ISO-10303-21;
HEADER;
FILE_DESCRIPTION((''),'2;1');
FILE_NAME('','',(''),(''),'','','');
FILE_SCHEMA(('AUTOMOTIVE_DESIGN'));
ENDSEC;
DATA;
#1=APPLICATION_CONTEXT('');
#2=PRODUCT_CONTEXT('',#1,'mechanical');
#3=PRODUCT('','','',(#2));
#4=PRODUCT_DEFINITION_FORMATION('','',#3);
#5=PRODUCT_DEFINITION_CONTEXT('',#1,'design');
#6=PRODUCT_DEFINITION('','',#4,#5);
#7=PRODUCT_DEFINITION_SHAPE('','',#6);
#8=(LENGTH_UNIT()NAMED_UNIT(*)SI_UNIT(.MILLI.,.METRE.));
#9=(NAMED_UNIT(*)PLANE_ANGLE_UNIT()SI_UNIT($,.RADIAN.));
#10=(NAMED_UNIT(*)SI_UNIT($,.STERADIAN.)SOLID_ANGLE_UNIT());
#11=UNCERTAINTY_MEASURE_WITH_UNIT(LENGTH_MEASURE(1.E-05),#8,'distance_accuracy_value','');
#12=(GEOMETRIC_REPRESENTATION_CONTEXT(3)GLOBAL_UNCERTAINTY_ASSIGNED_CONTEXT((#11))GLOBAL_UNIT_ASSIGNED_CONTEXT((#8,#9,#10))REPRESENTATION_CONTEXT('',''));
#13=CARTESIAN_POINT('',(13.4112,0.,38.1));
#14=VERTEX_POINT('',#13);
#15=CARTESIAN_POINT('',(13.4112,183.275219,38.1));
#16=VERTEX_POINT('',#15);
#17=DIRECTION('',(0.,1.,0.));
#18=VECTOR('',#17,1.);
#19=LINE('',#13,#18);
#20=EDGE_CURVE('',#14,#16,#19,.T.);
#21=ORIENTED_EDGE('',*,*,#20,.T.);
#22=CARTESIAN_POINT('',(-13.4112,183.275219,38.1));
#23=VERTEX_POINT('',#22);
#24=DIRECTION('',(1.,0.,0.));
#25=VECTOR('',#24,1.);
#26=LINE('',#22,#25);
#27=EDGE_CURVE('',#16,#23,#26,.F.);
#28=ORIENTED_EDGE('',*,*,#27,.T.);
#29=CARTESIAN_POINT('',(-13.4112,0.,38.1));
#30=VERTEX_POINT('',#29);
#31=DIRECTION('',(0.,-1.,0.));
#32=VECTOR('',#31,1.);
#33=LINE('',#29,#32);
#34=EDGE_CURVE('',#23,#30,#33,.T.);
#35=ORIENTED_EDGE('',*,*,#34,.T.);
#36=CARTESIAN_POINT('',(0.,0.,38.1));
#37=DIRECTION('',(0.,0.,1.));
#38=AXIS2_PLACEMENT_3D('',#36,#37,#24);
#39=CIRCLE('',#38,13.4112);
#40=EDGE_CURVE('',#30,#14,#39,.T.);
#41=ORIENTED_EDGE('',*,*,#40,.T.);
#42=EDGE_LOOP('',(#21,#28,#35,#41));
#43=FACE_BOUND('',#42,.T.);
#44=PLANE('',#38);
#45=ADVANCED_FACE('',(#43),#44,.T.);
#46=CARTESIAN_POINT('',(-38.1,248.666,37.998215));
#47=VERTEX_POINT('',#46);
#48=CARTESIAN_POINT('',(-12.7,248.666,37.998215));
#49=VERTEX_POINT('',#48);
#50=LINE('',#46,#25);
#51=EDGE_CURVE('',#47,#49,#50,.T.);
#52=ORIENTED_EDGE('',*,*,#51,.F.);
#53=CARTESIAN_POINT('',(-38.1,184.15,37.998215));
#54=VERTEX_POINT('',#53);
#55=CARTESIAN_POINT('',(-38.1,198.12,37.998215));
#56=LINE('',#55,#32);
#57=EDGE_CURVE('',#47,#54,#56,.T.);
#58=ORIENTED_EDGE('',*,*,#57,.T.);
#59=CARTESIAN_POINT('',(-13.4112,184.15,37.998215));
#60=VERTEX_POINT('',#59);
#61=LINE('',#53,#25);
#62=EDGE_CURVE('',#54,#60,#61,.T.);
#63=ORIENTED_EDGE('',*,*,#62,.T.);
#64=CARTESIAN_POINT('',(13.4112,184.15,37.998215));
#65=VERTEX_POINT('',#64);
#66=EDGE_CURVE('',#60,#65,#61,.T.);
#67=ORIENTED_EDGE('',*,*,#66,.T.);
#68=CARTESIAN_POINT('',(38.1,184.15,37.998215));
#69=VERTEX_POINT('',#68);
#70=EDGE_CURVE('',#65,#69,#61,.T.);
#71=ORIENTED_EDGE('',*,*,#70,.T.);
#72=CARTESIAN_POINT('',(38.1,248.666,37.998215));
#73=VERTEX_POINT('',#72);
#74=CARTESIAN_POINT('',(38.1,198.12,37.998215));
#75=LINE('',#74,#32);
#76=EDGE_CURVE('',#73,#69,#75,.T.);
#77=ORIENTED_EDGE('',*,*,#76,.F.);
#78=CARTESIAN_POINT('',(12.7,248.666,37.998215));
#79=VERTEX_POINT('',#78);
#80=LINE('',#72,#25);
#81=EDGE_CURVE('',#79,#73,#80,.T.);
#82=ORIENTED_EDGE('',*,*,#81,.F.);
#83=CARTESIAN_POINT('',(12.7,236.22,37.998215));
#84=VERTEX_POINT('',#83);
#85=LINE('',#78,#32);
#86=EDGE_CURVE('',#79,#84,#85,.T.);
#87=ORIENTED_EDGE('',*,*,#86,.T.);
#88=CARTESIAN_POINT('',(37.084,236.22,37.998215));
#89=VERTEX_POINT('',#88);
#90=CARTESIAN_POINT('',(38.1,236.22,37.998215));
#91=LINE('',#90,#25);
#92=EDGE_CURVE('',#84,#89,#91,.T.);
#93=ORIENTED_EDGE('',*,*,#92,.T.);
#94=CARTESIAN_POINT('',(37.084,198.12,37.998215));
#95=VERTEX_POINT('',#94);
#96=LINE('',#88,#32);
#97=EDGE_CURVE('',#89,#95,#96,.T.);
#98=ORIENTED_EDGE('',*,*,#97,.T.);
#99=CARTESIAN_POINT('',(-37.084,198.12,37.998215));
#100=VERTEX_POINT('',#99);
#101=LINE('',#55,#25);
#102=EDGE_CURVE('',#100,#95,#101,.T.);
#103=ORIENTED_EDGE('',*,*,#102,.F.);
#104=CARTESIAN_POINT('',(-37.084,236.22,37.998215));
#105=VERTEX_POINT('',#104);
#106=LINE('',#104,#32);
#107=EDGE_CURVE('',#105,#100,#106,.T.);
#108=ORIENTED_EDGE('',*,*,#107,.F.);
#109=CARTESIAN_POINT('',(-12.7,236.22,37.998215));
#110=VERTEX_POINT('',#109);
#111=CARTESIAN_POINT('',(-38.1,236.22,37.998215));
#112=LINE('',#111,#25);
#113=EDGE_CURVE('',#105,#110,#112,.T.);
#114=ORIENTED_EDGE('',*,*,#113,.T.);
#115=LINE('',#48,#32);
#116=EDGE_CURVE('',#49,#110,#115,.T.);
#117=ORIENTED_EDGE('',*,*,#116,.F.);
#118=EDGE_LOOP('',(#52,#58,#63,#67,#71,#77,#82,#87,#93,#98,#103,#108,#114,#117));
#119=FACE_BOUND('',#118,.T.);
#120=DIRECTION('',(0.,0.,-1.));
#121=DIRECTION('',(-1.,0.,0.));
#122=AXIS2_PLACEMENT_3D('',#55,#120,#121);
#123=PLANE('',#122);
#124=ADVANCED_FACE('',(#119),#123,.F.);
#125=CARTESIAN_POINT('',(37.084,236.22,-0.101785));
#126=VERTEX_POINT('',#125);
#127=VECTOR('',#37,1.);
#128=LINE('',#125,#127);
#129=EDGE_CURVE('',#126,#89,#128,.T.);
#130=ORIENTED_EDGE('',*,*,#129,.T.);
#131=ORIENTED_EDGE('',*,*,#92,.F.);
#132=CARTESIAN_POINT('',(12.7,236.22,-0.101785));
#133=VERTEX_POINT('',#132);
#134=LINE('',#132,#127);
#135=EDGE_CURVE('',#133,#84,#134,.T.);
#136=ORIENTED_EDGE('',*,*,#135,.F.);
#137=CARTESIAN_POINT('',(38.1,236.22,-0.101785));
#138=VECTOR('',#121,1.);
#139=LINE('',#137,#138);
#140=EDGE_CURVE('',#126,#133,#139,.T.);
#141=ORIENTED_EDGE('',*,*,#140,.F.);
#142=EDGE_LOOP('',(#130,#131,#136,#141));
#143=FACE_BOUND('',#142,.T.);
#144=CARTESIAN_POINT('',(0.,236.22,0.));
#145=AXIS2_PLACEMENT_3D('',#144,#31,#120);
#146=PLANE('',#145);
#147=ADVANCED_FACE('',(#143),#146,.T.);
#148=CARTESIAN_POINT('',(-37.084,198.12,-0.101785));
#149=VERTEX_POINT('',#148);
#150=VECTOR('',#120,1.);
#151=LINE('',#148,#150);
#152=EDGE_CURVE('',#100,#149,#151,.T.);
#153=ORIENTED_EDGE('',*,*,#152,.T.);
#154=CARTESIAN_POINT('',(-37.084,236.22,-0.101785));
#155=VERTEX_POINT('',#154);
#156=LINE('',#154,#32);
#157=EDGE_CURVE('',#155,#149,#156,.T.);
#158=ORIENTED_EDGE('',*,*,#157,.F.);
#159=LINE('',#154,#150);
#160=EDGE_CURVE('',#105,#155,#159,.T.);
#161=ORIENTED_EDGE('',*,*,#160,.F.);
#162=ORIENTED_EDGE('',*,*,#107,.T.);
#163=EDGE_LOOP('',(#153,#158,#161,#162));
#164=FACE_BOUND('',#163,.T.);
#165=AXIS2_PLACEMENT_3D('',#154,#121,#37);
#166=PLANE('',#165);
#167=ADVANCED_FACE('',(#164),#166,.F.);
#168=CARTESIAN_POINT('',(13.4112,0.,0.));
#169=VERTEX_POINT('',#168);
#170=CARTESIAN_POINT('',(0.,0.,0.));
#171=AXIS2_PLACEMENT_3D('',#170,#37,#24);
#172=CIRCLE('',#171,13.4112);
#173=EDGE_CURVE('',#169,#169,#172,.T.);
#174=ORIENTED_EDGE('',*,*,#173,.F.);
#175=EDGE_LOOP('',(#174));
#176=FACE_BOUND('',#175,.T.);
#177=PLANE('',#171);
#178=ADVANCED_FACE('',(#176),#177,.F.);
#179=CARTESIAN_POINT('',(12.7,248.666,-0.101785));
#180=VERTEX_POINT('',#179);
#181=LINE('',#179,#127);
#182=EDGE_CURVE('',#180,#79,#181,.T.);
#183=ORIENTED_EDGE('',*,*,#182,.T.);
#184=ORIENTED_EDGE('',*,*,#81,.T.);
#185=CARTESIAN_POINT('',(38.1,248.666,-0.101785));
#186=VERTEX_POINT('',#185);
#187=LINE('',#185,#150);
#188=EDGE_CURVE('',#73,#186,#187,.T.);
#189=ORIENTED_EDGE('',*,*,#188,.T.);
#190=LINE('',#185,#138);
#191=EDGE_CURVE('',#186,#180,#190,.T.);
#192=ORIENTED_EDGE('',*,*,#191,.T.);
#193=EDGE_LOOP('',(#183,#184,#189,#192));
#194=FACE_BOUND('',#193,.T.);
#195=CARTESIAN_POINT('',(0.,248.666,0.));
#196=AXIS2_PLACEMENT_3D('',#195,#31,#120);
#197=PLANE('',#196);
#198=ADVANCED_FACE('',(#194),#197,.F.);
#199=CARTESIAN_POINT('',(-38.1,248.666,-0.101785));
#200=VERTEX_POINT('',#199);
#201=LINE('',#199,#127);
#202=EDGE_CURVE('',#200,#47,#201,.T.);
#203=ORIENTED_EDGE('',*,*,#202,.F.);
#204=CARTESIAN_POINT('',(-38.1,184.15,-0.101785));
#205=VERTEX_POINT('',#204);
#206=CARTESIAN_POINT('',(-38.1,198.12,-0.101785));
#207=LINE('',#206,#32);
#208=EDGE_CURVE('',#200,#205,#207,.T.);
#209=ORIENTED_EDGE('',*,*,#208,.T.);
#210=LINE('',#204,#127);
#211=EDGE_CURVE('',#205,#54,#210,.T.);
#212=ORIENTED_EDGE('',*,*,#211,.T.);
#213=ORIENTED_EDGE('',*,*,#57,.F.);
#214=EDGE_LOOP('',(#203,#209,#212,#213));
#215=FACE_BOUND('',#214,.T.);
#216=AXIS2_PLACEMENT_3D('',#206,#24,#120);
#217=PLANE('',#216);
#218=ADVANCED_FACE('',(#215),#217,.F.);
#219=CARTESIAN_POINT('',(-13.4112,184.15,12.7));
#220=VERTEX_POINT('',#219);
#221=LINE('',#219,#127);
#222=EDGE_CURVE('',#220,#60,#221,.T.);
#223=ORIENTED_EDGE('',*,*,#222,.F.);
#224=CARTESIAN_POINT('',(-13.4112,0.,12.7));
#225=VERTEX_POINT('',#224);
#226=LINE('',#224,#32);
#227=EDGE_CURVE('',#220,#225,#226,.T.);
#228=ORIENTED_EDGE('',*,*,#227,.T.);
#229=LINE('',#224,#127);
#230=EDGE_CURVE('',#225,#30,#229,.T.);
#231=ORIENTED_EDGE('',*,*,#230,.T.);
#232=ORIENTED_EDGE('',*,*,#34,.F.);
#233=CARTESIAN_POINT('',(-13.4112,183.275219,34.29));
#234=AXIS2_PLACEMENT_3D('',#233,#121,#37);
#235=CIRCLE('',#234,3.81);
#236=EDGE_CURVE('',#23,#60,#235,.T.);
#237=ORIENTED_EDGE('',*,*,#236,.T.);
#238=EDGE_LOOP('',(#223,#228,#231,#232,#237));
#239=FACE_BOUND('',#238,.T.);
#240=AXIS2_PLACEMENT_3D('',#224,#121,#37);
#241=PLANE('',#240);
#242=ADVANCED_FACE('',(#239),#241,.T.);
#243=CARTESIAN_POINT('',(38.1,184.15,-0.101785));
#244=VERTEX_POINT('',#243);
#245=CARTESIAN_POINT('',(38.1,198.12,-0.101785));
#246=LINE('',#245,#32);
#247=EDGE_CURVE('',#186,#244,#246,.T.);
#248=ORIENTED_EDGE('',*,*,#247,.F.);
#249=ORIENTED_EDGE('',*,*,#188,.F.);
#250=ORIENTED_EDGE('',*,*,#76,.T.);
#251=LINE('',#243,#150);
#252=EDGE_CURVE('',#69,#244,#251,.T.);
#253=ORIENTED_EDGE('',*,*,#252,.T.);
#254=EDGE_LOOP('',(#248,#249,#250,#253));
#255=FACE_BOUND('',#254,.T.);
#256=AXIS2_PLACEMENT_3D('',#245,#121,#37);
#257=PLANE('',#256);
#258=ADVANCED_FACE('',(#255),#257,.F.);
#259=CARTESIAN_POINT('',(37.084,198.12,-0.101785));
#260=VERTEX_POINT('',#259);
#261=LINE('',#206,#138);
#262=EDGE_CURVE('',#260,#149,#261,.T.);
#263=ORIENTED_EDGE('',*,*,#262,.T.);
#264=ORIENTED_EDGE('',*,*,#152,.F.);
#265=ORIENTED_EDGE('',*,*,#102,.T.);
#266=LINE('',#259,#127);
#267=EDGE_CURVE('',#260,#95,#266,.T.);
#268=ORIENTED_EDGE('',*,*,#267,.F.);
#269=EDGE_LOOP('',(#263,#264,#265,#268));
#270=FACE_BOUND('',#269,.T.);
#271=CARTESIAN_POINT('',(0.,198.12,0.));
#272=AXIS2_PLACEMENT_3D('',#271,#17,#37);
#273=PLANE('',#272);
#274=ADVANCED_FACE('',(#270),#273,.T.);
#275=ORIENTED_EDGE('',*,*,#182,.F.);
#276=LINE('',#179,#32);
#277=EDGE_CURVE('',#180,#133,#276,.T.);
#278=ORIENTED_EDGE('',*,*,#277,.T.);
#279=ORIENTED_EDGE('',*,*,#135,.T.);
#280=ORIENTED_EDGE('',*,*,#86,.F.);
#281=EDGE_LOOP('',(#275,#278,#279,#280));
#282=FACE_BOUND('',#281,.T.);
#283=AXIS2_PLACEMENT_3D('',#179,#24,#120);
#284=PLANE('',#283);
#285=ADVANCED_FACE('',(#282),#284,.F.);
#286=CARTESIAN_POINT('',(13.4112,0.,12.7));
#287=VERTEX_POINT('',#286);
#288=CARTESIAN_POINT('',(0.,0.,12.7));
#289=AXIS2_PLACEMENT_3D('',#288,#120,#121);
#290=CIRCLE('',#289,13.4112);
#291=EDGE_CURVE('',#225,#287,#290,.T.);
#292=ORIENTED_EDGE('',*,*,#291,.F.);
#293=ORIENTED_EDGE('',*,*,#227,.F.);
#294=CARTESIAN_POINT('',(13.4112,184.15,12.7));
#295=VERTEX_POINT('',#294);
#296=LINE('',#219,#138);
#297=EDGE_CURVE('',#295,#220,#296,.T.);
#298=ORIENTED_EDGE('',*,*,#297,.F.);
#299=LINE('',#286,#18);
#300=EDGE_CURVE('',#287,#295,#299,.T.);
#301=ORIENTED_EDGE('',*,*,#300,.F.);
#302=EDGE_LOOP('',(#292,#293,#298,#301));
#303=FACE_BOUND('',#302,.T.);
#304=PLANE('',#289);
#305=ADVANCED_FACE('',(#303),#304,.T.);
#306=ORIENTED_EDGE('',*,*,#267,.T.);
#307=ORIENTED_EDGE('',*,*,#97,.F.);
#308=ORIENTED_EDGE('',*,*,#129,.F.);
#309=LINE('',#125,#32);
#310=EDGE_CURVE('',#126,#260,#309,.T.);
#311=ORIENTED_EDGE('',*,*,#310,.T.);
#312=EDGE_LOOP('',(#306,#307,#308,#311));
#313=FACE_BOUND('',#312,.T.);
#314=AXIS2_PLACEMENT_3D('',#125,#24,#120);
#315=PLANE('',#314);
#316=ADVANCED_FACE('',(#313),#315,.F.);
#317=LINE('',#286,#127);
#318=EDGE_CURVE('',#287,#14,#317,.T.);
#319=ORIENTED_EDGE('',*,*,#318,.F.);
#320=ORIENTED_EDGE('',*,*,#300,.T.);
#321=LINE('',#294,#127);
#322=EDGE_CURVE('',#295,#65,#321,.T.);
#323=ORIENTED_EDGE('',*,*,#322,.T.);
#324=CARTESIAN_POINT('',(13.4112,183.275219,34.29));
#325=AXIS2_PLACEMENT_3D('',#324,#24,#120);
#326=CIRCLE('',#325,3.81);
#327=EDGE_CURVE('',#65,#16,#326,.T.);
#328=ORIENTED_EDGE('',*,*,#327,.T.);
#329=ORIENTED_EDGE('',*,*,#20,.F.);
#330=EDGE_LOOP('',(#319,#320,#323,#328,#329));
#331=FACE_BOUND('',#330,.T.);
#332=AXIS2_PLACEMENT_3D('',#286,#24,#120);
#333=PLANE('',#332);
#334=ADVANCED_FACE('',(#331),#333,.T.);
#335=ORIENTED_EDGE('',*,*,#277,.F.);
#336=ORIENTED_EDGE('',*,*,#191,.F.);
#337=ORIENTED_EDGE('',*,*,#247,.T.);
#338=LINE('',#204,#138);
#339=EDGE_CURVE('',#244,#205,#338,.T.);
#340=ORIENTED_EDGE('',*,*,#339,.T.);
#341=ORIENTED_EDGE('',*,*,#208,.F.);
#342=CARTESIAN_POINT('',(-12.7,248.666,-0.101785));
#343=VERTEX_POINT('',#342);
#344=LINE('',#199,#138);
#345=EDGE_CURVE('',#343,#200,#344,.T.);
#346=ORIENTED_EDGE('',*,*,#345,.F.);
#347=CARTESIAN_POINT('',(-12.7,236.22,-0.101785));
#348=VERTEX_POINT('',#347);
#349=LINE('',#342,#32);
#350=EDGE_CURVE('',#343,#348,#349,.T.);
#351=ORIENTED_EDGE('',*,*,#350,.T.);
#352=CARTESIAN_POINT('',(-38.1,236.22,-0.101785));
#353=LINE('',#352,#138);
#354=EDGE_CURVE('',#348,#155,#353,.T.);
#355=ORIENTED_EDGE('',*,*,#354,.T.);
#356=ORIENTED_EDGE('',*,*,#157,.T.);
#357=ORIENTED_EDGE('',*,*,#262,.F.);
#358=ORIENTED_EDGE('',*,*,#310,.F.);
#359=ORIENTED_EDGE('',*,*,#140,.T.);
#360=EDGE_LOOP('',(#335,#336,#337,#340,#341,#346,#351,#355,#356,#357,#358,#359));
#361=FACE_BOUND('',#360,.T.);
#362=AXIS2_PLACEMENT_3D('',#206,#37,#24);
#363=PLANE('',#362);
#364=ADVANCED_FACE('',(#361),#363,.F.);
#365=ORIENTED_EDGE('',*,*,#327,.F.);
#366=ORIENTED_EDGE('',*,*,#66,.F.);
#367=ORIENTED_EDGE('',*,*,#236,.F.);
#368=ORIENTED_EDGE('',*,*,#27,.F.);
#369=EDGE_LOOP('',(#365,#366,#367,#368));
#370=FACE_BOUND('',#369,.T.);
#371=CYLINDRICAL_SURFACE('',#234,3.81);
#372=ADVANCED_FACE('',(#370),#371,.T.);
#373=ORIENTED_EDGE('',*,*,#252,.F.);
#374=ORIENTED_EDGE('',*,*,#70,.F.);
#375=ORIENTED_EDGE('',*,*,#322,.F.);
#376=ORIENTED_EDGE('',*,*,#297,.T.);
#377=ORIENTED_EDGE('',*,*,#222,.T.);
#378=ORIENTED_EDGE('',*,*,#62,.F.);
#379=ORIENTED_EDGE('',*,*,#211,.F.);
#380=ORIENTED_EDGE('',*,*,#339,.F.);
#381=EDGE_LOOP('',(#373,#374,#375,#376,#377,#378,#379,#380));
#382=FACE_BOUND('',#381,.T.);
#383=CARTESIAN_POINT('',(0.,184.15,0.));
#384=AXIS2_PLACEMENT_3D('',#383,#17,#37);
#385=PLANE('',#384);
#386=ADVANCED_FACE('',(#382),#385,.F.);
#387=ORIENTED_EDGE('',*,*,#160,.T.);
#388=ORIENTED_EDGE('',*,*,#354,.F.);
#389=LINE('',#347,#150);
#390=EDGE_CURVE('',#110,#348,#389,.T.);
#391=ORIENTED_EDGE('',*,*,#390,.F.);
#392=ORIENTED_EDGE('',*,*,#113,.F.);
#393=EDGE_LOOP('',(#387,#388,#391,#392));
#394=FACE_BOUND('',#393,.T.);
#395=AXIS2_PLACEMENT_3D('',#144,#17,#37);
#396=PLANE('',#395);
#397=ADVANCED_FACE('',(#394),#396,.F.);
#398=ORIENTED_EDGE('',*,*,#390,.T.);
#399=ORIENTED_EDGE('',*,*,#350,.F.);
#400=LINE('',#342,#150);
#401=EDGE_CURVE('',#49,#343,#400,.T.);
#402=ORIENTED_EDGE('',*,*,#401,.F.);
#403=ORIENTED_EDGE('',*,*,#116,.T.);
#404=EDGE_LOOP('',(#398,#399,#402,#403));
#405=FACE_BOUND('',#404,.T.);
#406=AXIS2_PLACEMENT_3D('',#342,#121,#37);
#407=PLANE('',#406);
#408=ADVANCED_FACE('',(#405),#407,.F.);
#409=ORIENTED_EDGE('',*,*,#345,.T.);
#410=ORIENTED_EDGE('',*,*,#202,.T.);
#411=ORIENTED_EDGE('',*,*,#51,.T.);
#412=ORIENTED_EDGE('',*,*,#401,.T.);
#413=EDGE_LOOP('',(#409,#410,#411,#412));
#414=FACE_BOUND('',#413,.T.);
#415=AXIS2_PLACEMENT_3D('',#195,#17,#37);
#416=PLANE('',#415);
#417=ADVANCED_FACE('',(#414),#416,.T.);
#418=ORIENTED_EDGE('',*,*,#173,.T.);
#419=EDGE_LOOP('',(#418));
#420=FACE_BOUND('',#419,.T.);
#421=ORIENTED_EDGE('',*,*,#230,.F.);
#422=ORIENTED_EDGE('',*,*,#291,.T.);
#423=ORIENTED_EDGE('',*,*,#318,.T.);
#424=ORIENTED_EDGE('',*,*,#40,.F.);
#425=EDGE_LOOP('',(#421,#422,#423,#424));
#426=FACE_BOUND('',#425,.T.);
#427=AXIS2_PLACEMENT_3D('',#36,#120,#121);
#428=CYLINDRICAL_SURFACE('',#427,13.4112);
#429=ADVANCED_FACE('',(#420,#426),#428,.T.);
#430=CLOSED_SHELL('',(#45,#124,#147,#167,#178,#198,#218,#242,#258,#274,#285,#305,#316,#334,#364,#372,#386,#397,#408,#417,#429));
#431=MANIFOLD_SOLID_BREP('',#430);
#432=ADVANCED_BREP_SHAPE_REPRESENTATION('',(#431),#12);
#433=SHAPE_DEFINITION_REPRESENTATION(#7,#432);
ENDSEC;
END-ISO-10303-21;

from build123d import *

# Parameters (mm, degrees)
SKETCH2_R           = 13.4112
BOSS_EXTRUDE1_DEPTH = 38.1
SKETCH5_W           = 26.8224
SKETCH5_H           = 184.15
BOSS_EXTRUDE2_DEPTH = 25.4
SKETCH8_W           = 76.2
SKETCH8_H           = 38.1
BOSS_EXTRUDE3_DEPTH = 13.97
SKETCH9_W           = 1.016
SKETCH9_H           = 38.1
BOSS_EXTRUDE4_DEPTH = 38.1
SKETCH10_W          = 25.4
SKETCH10_H          = 38.1
BOSS_EXTRUDE5_DEPTH = 12.446
FILLET1_R           = 3.81


with BuildPart() as part:
    # Sketch2 → Boss-Extrude1 (new body)
    with BuildSketch(Plane.XY):
        with Locations(Location((0, 0, 0), (0, 0, 180))):
            Circle(SKETCH2_R)
    extrude(amount=BOSS_EXTRUDE1_DEPTH)

    # Sketch5 → Boss-Extrude2 (add)
    with BuildSketch(Plane.XY.offset(38.1)):
        with Locations((0, 92.075)):
            Rectangle(SKETCH5_W, SKETCH5_H)
    extrude(amount=-BOSS_EXTRUDE2_DEPTH)

    # Sketch8 → Boss-Extrude3 (add)
    with BuildSketch(Plane(origin=(0, 184.15, 0), x_dir=(1, 0, 0), z_dir=(0, 1, 0))):
        with Locations((0, -18.948214994)):
            Rectangle(SKETCH8_W, SKETCH8_H)
    extrude(amount=BOSS_EXTRUDE3_DEPTH)

    # Sketch9 → Boss-Extrude4 (add)
    with BuildSketch(Plane(origin=(0, 198.12, 0), x_dir=(1, 0, 0), z_dir=(0, 1, 0))):
        with Locations((-37.592, -18.948214994)):
            Rectangle(SKETCH9_W, SKETCH9_H)
        with Locations((37.592, -18.948214994)):
            Rectangle(SKETCH9_W, SKETCH9_H)
    extrude(amount=BOSS_EXTRUDE4_DEPTH)

    # Sketch10 → Boss-Extrude5 (add)
    with BuildSketch(Plane(origin=(0, 236.22, 0), x_dir=(1, 0, 0), z_dir=(0, 1, 0))):
        with Locations((-25.4, -18.948214994)):
            Rectangle(SKETCH10_W, SKETCH10_H)
        with Locations((25.4, -18.948214994)):
            Rectangle(SKETCH10_W, SKETCH10_H)
    extrude(amount=BOSS_EXTRUDE5_DEPTH)

    # Fillet1
    # the kernel refuses this fillet: 3.81 mm, written as the material it takes off along each edge
    with BuildSketch(Plane(origin=(15.598152153, 184.15, 38.1), x_dir=(0, 0, -1), z_dir=(-1, 0, 0))) as fillet1_piece_1:
        with BuildLine():
            CenterArc((3.81, 0.874780861), FILLET1_R, 180, 13.273598337)
            Line((0, 0.874780861), (-0.0762, 0.874780861))
            Line((-0.0762, 0.874780861), (-0.0762, 0))
            Line((-0.0762, 0), (0, -0.0762))
            ThreePointArc((0, -0.0762), (0.050892503, -0.0762), (0.027620706, -0.017495617))
            Line((0.027620706, -0.017495617), (0.101785006, 0))
        make_face()
    extrude(amount=31.196304306, mode=Mode.SUBTRACT)


solid = part.part
